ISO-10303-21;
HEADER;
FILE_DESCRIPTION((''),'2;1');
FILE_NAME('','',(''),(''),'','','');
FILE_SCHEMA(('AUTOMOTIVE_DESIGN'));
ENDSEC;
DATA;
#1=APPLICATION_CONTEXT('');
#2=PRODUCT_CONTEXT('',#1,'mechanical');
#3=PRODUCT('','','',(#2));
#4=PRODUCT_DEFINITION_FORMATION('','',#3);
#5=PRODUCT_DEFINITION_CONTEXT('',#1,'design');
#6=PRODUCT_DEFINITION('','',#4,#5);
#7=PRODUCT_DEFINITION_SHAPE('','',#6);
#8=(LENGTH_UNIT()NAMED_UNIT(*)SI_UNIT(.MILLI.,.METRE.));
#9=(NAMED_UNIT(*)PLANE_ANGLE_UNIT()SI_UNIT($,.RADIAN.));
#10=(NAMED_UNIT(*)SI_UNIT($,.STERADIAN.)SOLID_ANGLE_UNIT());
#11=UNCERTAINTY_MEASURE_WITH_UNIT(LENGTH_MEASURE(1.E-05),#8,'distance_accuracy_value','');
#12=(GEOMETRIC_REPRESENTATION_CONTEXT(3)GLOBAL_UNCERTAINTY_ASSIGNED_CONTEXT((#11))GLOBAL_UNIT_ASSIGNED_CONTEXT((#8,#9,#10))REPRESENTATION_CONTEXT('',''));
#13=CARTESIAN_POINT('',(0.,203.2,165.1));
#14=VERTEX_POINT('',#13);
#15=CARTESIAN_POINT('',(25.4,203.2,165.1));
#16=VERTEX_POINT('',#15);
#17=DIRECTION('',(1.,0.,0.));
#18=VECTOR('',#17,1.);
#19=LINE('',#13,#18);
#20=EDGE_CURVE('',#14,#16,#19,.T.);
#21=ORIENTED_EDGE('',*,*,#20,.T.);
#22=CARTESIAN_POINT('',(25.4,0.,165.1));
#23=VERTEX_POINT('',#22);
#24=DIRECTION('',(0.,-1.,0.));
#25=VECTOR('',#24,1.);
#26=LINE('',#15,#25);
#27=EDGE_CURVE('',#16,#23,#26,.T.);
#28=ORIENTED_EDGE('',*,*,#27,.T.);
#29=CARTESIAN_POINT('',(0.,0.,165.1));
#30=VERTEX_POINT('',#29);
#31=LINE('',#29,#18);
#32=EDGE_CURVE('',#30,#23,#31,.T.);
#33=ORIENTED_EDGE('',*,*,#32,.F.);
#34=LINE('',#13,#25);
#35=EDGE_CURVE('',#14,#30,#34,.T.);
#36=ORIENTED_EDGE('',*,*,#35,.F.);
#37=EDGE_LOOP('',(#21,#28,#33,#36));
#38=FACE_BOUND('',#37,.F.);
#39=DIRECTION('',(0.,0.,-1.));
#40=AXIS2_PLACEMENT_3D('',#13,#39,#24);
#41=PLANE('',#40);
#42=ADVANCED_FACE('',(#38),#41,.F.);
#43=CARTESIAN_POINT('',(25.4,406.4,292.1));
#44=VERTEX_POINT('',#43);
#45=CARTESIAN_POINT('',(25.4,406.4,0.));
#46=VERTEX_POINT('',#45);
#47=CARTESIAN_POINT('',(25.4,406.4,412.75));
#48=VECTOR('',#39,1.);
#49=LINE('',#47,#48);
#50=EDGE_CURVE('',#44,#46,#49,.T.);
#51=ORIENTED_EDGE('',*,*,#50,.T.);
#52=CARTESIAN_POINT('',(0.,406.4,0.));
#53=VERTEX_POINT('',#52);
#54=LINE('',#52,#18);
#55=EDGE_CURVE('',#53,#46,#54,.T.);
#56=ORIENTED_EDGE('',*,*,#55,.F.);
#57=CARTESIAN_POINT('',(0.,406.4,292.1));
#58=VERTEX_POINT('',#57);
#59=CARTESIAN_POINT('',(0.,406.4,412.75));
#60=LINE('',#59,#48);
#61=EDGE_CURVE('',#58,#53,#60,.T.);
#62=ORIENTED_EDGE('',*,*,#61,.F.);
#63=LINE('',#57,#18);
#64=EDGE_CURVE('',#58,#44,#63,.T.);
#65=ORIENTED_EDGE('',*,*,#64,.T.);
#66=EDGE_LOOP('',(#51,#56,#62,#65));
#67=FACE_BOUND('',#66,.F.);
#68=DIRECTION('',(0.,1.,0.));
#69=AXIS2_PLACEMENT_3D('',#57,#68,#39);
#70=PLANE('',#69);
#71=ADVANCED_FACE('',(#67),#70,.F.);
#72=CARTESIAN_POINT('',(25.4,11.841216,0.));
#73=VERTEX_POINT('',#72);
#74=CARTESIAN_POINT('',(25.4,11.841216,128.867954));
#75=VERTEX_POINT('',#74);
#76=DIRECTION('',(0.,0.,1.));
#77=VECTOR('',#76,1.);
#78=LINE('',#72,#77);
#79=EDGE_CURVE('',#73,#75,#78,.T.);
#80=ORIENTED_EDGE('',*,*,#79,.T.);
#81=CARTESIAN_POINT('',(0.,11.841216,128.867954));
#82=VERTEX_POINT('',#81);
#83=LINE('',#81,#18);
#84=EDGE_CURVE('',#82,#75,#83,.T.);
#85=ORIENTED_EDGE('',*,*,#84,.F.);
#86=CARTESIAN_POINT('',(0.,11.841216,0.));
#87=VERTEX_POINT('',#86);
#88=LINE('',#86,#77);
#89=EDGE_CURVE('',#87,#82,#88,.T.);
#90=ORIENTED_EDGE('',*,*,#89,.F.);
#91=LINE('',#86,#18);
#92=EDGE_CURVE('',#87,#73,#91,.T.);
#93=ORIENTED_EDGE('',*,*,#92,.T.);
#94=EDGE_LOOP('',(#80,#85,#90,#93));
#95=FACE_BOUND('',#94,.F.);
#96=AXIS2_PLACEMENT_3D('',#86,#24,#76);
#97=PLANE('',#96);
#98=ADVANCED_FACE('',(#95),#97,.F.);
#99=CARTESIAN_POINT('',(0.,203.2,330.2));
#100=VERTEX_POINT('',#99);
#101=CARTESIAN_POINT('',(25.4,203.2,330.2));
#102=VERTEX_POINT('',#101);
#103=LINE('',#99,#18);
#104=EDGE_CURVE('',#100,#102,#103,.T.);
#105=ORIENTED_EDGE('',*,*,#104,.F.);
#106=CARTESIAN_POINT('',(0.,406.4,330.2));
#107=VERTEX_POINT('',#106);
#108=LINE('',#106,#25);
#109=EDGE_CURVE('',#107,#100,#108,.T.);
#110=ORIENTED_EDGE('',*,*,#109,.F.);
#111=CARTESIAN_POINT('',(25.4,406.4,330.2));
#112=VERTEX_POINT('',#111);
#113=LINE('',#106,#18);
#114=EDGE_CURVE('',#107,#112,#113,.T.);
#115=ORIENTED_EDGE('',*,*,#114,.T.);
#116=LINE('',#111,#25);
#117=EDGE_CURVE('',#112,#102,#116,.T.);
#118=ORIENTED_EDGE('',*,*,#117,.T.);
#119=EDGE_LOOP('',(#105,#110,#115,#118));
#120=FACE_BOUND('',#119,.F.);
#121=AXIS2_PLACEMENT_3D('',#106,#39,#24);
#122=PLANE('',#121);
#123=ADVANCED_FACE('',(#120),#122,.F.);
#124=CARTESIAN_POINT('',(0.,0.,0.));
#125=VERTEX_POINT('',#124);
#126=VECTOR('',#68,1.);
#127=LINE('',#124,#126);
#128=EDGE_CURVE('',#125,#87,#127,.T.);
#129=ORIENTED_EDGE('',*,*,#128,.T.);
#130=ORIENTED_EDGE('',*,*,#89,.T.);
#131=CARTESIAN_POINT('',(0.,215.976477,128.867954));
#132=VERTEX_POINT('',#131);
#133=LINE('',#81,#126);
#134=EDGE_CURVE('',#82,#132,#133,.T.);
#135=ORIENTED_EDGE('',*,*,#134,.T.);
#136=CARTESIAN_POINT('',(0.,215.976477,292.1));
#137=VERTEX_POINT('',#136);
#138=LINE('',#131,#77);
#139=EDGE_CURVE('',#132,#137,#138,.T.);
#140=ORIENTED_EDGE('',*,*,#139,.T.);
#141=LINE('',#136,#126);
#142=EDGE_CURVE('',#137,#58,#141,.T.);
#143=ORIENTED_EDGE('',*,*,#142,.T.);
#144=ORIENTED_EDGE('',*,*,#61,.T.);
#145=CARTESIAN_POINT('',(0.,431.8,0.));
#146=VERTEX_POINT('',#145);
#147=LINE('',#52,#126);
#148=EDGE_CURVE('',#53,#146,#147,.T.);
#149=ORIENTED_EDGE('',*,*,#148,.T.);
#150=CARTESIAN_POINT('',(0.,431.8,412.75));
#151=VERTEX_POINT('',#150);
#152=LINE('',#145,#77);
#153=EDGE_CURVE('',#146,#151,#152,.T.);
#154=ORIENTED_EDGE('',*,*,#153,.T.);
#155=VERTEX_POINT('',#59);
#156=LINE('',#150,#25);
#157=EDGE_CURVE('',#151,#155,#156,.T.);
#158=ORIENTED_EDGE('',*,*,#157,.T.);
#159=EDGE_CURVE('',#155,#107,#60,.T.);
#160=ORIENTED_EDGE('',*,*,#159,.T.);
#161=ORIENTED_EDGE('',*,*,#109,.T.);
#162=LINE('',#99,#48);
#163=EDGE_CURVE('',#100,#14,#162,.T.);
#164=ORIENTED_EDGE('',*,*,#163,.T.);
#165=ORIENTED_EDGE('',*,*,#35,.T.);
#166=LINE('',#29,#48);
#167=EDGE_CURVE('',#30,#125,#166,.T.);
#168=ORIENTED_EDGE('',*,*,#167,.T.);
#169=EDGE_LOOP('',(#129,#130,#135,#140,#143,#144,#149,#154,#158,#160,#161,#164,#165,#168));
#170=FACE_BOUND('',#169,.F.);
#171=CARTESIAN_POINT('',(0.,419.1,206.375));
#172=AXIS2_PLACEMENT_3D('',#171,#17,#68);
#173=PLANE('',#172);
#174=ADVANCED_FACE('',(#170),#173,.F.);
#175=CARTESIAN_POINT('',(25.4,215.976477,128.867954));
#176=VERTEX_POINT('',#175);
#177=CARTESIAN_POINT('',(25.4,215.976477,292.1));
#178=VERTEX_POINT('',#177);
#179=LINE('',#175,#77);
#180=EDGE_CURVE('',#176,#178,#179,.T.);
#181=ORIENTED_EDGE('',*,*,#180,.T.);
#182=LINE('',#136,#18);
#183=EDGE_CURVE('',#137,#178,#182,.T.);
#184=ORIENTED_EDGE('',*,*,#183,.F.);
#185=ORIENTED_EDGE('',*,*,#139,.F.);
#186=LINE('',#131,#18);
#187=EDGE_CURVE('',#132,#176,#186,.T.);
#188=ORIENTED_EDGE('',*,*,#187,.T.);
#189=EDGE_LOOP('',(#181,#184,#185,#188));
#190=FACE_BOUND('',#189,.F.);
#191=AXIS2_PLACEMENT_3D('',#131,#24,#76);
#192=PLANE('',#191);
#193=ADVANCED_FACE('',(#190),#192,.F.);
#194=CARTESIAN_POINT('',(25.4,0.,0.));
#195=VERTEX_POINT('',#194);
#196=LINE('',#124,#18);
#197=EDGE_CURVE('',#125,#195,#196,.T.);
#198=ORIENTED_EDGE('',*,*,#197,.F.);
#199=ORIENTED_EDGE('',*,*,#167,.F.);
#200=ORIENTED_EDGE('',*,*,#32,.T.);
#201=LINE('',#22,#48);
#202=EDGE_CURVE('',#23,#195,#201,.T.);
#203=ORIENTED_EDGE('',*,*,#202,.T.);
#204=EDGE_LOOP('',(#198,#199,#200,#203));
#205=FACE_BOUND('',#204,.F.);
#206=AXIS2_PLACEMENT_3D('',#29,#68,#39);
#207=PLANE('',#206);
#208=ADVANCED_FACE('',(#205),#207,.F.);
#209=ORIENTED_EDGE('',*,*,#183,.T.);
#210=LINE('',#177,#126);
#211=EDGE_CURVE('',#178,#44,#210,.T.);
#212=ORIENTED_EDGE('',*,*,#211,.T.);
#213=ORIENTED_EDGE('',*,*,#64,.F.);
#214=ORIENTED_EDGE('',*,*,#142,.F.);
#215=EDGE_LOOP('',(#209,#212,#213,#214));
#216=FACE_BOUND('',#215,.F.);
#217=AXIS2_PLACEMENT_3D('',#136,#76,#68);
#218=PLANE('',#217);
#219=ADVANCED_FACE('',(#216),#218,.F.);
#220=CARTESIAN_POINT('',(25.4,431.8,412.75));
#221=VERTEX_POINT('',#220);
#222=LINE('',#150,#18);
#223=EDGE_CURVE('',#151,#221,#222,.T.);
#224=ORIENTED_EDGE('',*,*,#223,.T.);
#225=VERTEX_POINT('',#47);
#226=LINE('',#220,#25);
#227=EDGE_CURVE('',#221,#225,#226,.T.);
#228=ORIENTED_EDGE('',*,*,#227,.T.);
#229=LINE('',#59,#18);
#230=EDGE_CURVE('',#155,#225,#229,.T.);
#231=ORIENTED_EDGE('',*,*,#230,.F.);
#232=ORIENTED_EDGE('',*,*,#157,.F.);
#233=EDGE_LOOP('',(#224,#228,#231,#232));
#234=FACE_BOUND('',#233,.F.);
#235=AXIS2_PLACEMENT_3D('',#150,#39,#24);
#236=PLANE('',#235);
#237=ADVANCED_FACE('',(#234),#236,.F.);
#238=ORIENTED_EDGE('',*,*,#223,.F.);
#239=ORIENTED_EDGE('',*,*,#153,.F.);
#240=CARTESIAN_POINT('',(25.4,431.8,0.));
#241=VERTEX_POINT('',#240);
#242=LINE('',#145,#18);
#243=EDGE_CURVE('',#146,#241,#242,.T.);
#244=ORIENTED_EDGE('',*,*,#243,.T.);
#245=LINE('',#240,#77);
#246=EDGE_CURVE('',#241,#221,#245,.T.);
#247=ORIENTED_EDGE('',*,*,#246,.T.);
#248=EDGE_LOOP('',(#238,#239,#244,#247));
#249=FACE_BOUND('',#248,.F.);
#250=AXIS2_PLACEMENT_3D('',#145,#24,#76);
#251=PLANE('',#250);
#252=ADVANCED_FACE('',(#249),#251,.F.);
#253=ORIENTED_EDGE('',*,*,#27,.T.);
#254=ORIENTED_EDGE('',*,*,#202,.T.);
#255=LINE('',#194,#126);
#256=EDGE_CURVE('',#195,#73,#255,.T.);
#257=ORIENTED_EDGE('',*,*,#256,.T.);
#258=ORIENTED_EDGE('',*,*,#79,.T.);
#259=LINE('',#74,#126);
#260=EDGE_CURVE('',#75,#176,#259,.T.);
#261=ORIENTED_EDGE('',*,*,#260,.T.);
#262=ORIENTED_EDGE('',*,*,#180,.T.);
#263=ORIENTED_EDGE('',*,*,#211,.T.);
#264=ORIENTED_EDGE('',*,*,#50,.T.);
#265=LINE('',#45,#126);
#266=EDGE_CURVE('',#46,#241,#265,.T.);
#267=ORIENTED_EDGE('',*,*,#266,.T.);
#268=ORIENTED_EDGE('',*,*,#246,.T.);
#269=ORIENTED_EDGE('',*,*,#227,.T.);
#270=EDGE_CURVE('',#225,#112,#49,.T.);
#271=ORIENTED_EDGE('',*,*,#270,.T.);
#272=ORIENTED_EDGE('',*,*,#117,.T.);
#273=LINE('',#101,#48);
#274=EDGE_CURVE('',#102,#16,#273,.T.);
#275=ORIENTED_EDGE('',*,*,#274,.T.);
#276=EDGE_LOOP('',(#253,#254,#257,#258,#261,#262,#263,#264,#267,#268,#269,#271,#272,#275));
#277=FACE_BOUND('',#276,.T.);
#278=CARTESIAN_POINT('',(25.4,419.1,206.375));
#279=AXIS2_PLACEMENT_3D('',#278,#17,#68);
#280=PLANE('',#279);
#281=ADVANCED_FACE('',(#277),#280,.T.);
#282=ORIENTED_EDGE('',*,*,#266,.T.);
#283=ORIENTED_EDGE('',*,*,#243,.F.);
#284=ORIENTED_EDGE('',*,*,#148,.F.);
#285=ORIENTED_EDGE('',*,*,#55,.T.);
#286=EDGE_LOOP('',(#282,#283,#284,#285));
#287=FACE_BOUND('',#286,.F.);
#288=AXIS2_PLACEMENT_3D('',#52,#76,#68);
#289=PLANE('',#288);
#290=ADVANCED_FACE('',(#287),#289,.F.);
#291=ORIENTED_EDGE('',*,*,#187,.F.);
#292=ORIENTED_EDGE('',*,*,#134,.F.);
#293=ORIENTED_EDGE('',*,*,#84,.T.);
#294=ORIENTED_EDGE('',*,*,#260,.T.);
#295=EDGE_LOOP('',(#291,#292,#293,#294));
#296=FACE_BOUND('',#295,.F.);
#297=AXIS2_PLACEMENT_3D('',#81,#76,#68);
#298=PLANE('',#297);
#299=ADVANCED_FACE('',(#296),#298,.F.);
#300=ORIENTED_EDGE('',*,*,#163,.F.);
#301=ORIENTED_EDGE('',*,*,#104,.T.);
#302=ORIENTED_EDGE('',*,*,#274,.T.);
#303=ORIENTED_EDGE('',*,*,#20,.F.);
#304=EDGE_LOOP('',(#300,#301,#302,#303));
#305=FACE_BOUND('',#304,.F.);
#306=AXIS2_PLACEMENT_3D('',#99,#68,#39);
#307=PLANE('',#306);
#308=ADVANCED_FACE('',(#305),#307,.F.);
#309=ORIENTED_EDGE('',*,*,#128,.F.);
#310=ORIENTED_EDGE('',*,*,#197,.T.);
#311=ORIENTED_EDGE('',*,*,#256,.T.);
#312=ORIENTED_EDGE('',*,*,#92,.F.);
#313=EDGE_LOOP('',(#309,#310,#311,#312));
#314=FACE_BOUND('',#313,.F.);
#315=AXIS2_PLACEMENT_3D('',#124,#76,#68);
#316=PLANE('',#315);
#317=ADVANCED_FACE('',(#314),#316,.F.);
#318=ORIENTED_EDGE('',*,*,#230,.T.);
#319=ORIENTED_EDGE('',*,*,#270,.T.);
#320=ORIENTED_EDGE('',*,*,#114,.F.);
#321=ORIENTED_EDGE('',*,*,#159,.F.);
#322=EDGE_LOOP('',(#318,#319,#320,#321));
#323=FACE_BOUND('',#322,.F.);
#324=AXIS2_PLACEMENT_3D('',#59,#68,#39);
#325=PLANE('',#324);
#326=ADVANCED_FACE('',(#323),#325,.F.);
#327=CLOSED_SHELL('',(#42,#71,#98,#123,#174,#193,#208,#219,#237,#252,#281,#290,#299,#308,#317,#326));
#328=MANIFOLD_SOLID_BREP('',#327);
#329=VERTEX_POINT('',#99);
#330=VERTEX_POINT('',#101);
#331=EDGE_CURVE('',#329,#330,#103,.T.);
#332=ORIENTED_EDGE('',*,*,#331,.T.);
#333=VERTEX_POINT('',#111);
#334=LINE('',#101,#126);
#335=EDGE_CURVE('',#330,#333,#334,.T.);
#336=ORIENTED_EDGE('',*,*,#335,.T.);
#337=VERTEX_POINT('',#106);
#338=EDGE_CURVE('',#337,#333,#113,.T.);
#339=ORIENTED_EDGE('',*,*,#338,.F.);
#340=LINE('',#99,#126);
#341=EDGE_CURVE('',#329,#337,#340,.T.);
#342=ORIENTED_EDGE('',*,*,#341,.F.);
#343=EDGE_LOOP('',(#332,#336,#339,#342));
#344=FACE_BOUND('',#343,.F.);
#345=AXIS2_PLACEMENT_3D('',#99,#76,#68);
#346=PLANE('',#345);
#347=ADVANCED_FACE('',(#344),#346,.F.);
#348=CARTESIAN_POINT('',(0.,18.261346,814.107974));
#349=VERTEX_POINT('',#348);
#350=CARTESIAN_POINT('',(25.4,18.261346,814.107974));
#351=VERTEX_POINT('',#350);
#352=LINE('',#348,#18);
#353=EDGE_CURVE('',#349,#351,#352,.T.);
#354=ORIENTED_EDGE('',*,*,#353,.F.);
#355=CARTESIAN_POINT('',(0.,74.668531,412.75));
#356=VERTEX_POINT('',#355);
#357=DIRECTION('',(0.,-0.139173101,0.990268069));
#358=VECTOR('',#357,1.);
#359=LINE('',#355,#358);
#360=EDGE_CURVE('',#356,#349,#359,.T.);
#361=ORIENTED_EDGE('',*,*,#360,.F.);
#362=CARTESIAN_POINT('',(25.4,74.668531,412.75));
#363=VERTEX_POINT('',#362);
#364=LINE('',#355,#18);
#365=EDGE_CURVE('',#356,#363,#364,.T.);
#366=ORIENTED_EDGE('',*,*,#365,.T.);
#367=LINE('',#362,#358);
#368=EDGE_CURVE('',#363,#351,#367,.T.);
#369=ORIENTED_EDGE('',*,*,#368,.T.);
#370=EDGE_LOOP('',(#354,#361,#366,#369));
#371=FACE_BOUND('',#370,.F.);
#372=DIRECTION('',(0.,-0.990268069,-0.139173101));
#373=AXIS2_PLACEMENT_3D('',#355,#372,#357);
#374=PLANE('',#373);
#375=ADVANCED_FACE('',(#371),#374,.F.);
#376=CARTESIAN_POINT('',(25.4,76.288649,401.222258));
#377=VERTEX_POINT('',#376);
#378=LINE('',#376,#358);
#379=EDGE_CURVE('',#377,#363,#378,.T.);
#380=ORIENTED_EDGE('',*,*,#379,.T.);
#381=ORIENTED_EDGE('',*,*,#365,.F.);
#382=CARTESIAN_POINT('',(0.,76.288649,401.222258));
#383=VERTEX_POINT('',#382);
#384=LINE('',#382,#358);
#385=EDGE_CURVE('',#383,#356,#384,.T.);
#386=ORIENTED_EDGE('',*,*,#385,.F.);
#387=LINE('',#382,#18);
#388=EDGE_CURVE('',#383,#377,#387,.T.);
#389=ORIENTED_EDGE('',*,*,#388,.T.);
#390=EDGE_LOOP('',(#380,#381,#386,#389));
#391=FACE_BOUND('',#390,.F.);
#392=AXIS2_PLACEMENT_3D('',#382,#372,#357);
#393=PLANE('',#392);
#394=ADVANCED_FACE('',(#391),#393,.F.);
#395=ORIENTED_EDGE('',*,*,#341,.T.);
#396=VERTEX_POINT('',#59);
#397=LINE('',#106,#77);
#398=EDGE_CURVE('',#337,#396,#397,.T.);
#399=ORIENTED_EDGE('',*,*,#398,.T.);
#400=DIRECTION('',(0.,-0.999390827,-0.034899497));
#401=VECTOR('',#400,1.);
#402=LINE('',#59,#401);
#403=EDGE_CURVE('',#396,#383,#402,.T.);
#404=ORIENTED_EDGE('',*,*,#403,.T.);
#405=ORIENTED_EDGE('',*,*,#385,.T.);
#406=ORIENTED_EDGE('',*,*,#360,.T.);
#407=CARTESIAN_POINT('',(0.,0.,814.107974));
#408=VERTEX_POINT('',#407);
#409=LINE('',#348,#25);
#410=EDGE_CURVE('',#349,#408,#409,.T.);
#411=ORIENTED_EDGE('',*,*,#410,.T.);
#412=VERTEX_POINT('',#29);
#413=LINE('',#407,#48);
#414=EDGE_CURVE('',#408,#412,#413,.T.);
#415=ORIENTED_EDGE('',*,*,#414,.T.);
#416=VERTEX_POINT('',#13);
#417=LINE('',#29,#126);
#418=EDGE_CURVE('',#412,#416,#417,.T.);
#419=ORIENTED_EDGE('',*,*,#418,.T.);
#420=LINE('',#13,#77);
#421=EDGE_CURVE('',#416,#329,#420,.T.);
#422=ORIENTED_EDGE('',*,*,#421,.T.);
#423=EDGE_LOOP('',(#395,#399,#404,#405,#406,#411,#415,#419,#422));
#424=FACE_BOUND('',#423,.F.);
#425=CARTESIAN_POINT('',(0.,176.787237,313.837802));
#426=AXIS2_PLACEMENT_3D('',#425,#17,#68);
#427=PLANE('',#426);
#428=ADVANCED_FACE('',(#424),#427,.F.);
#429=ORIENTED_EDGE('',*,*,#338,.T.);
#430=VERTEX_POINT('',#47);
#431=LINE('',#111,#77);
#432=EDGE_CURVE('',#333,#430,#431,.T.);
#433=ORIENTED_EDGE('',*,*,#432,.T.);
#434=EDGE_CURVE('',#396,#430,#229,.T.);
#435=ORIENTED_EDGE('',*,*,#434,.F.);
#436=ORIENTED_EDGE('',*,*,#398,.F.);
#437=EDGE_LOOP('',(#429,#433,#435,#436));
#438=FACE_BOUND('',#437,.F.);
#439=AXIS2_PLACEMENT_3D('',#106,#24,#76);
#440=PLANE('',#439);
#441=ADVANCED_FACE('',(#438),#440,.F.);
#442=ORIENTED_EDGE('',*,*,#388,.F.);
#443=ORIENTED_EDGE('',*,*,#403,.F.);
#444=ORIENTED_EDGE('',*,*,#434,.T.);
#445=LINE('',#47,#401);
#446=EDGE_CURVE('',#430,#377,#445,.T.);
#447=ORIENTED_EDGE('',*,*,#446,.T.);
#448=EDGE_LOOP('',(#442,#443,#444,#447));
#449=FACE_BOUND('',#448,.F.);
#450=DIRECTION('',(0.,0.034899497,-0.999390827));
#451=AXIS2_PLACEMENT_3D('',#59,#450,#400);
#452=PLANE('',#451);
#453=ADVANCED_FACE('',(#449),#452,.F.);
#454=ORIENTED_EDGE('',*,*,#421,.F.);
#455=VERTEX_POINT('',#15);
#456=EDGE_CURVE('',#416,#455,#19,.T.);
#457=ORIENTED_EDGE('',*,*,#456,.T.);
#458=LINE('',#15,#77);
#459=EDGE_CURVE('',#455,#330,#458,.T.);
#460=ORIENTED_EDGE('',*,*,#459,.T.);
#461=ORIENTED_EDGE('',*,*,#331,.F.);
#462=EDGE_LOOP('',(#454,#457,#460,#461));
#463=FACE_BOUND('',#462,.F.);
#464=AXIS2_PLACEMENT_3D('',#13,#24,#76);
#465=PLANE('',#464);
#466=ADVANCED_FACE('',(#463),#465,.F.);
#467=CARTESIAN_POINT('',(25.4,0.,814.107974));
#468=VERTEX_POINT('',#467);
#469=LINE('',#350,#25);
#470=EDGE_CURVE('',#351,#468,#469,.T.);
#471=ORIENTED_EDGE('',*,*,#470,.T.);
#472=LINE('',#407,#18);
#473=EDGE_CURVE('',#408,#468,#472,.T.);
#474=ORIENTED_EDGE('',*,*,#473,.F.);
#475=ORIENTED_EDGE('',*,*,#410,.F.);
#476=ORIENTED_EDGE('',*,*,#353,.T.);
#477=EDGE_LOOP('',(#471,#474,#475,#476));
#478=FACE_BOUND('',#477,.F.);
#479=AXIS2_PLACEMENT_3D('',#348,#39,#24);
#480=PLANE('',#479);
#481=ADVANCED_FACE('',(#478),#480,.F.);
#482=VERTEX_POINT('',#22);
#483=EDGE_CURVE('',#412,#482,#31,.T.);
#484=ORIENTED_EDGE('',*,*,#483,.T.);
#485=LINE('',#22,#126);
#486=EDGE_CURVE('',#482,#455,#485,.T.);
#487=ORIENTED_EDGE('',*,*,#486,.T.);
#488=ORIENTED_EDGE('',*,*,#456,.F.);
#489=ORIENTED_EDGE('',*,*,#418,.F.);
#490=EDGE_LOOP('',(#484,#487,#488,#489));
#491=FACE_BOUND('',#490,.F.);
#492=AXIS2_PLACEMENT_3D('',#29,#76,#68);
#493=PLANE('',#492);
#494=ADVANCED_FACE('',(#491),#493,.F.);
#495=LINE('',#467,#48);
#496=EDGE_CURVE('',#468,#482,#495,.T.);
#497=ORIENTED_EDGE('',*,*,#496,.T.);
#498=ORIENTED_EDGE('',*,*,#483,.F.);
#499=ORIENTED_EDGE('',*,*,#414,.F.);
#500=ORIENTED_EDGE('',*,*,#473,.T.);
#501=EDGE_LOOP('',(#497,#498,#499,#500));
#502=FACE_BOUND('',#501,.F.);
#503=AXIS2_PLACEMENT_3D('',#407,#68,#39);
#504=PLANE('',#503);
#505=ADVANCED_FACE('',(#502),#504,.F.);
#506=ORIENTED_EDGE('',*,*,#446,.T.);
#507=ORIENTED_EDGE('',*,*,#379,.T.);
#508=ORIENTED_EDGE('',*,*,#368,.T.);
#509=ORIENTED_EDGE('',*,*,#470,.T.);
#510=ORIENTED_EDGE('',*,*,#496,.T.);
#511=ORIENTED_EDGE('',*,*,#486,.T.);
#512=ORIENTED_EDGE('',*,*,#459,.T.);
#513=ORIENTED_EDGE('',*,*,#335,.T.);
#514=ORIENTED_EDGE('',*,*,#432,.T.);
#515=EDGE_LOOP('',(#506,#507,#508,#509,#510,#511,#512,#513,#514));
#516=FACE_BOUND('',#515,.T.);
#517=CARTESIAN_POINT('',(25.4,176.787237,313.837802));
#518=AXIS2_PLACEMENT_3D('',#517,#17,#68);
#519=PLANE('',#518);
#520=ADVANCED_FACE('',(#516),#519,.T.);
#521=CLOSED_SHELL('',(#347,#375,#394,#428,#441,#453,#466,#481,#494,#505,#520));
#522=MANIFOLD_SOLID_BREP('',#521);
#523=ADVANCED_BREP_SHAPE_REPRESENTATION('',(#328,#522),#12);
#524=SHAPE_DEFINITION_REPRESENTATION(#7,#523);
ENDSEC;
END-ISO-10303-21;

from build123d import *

# Parameters (mm, degrees)
F1_DEPTH = 25.4
F2_DEPTH = 25.4


# Not quite as in the source:
# - a feature names something its author has since deleted; it is built from what else it names


with BuildPart() as f1:
    # F0 (on Right) → F1 (new body)
    with BuildSketch(Plane.YZ):
        Polygon((0, 203.2), (0, 165.1), (203.2, 165.1), (203.2, 330.2), (406.4, 330.2), (406.4, 412.75), (76.288649265, 401.2222576144), (74.6685307278, 412.75), (0, 412.75), (0, 330.2), align=None)
        Polygon((0, 814.1079739114), (0, 412.75), (74.6685307278, 412.75), (18.2613460599, 814.1079739114), align=None)
    extrude(amount=F1_DEPTH)


with BuildPart() as f2:
    # F0 (on Right) → F2 (new body)
    with BuildSketch(Plane.YZ):
        Polygon((406.4, 412.75), (406.4, 330.2), (406.4, 292.1), (406.4, 0), (431.8, 0), (431.8, 412.75), align=None)
        Polygon((0, 165.1), (0, 0), (11.8412161246, 0), (11.8412161246, 128.8679540157), (203.2, 128.8679540157), (215.9764766693, 128.8679540157), (215.9764766693, 292.1), (406.4, 292.1), (406.4, 330.2), (203.2, 330.2), (203.2, 165.1), align=None)
    extrude(amount=F2_DEPTH)


solid = Compound([f1.part, f2.part])
